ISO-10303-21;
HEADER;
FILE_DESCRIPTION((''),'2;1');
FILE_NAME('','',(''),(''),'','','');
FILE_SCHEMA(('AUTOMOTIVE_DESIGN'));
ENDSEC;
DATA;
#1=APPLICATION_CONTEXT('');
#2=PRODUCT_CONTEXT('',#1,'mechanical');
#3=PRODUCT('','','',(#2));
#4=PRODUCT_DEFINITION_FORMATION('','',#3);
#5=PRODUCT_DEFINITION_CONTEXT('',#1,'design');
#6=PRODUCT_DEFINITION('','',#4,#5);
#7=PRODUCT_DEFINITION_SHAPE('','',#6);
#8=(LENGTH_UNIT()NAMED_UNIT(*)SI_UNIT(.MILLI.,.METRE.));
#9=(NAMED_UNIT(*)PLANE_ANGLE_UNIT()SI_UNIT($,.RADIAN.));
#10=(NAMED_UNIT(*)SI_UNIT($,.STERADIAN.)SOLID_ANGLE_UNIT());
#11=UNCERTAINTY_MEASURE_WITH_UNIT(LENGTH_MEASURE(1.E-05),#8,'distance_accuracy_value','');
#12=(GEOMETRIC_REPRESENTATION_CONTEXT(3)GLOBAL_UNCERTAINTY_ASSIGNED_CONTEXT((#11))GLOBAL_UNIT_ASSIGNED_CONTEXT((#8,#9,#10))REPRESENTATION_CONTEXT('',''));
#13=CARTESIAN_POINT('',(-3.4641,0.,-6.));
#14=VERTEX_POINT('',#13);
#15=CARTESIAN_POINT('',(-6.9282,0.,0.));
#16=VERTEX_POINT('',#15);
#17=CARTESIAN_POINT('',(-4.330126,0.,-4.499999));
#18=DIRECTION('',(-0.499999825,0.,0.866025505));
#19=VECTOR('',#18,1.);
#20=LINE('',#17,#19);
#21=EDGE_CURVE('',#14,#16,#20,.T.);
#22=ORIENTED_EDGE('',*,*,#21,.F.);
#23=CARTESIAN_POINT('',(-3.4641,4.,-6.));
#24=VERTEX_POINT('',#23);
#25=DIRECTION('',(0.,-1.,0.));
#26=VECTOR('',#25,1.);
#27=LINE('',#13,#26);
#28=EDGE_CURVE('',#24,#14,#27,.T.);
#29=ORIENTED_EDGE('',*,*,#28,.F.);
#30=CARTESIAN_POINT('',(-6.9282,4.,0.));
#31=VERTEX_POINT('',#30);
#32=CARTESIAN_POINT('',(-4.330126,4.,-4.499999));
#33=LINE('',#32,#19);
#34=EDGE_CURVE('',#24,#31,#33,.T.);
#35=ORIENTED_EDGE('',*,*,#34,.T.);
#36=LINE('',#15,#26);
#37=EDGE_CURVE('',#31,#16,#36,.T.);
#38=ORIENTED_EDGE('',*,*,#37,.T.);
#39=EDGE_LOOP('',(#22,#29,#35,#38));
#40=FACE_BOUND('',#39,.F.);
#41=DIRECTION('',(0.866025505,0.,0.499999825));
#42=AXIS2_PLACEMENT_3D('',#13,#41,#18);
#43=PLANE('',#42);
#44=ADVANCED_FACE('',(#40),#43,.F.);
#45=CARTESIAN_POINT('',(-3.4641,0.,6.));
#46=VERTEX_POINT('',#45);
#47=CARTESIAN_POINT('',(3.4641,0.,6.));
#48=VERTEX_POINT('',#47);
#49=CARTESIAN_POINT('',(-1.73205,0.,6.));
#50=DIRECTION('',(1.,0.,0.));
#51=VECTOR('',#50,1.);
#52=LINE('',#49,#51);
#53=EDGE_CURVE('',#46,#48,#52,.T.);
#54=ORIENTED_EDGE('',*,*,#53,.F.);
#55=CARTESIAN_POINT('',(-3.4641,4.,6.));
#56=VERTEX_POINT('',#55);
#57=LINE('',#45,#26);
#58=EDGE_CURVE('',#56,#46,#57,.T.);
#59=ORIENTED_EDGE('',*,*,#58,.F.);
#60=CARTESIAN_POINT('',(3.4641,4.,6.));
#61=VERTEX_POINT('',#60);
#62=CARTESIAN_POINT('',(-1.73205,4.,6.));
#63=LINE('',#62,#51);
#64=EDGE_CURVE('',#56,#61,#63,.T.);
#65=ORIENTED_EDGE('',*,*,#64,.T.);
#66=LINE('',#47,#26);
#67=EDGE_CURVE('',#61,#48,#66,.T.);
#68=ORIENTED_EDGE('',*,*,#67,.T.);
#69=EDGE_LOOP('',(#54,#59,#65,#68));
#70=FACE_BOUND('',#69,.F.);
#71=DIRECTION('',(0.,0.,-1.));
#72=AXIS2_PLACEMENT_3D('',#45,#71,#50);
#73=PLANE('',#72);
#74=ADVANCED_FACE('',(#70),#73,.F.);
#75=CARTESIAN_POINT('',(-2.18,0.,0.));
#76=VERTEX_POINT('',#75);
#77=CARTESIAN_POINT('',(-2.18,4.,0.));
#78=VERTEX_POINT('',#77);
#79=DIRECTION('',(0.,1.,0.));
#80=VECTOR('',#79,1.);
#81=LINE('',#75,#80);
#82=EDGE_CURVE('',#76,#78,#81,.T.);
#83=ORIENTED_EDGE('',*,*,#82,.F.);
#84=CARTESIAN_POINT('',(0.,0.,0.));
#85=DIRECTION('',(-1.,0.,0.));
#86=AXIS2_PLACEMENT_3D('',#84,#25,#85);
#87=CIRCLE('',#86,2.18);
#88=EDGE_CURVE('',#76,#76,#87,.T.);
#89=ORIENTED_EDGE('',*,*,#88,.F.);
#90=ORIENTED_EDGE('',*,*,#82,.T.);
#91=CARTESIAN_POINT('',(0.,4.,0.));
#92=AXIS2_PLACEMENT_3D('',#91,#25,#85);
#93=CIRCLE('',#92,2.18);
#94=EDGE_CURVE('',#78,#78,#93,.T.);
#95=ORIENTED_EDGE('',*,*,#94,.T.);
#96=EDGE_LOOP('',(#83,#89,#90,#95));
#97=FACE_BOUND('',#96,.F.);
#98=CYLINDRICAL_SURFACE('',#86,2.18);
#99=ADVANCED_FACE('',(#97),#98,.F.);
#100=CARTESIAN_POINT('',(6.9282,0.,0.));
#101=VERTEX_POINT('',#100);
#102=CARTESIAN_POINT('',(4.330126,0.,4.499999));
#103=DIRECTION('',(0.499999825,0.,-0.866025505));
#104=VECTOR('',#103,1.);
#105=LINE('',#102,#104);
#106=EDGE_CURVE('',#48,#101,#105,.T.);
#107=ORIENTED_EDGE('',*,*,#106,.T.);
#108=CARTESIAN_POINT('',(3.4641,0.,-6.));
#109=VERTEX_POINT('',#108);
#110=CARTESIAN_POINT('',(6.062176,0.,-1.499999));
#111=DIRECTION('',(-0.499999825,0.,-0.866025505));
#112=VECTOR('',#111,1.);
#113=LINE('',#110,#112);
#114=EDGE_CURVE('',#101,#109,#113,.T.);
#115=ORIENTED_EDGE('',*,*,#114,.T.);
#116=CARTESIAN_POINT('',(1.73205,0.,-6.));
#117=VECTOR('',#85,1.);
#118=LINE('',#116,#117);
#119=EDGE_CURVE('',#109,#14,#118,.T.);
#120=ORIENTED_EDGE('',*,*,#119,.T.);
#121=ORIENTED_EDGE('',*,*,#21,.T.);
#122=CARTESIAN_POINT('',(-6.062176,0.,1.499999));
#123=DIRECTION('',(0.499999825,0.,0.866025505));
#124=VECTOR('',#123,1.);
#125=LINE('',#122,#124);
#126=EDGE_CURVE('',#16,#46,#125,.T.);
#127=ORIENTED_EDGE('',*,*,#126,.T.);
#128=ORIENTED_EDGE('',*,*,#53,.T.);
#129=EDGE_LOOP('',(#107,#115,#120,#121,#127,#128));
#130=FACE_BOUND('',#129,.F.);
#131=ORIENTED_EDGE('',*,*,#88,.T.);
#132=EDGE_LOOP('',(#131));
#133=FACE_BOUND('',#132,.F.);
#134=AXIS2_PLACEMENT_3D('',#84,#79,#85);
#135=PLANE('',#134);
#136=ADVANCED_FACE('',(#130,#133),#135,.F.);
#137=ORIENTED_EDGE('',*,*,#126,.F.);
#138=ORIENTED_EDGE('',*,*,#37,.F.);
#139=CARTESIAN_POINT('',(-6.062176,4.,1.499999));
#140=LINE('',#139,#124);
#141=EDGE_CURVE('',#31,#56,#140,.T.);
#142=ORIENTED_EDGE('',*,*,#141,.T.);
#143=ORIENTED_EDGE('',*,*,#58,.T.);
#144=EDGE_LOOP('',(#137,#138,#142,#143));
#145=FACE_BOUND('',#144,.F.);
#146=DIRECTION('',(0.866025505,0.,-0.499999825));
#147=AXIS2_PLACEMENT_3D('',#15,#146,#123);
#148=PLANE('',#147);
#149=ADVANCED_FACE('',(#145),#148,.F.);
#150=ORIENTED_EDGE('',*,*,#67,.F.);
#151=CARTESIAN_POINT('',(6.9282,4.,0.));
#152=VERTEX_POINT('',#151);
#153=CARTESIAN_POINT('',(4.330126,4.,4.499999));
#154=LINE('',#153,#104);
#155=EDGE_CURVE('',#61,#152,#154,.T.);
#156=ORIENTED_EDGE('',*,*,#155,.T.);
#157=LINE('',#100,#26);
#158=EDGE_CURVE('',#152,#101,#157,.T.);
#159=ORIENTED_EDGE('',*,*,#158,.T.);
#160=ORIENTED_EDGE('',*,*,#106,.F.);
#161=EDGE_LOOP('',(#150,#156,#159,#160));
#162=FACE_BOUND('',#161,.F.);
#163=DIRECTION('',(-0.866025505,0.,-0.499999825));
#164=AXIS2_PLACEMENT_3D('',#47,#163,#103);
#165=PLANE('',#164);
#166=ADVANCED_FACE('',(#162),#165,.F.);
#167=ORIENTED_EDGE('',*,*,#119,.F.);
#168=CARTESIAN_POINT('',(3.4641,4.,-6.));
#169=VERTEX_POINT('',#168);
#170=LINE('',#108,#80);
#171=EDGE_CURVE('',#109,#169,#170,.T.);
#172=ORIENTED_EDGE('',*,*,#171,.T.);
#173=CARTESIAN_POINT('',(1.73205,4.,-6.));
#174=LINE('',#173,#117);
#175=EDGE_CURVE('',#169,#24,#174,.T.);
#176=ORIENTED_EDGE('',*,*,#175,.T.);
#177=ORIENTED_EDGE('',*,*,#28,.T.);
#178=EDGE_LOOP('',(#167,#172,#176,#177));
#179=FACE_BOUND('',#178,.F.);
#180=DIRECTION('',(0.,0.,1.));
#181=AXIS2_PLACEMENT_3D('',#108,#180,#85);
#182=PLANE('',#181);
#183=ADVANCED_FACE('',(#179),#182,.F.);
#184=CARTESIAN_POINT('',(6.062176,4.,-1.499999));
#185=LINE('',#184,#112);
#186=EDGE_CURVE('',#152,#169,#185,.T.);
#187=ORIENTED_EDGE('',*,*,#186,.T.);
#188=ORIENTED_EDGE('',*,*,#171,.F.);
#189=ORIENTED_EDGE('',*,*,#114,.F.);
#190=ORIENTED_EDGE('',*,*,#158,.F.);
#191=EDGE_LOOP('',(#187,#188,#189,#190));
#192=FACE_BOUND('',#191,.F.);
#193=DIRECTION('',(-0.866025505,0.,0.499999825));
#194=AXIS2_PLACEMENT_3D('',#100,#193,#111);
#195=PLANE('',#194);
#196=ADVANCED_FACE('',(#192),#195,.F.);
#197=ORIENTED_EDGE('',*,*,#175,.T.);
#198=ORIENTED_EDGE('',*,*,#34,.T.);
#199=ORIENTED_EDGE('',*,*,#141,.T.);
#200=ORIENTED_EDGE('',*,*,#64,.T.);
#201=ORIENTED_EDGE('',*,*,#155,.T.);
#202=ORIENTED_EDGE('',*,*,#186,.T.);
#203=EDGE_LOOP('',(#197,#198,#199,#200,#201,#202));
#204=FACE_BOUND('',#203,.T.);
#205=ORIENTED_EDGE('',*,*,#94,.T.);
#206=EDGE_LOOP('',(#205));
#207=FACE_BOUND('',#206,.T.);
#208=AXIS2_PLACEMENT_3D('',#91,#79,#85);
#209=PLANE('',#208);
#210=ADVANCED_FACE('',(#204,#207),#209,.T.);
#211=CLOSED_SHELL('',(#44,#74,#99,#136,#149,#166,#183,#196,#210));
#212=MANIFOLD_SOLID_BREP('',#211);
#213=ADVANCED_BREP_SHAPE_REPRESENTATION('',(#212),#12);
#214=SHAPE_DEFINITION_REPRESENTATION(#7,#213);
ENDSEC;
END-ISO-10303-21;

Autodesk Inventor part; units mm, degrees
ref_plane "YZ Plane" through (0, 0, 0) normal (1, 0, 0) x (0, 1, 0)
ref_plane "XZ Plane" through (0, 0, 0) normal (0, 1, 0) x (-1, 0, 0)
ref_plane "XY Plane" through (0, 0, 0) normal (0, 0, 1) x (1, 0, 0)
sketch "Sketch1" plane through (0, 0, 0) normal (0, 1, 0) x (-1, 0, 0)
  circle A0 centre (0, 0) radius 2
  line L0 (-3.4641, -6) -> (3.4641, -6)
  line L1 (3.4641, -6) -> (6.9282, 0)
  line L2 (6.9282, 0) -> (3.4641, 6)
  line L3 (3.4641, 6) -> (-3.4641, 6)
  line L4 (-3.4641, 6) -> (-6.9282, 0)
  line L5 (-6.9282, 0) -> (-3.4641, -6)
  line L6 (0, 6) -> (0, -6) construction
  line L7 (-5.1962, 3) -> (5.1962, -3) construction
  line L8 (-5.1962, -3) -> (5.1962, 3) construction
  point P0 (0, 0)
  dimension "d0" = 4
  dimension "d1" = 12
extrude "Extrusion1" add sketch "Sketch1" along normal blind 4
offset faces "Size1" outward -0.18 faces at (-1.9935, 2.6667, -0.1609)
properties part number "Front_Wheel_Support_Test"
